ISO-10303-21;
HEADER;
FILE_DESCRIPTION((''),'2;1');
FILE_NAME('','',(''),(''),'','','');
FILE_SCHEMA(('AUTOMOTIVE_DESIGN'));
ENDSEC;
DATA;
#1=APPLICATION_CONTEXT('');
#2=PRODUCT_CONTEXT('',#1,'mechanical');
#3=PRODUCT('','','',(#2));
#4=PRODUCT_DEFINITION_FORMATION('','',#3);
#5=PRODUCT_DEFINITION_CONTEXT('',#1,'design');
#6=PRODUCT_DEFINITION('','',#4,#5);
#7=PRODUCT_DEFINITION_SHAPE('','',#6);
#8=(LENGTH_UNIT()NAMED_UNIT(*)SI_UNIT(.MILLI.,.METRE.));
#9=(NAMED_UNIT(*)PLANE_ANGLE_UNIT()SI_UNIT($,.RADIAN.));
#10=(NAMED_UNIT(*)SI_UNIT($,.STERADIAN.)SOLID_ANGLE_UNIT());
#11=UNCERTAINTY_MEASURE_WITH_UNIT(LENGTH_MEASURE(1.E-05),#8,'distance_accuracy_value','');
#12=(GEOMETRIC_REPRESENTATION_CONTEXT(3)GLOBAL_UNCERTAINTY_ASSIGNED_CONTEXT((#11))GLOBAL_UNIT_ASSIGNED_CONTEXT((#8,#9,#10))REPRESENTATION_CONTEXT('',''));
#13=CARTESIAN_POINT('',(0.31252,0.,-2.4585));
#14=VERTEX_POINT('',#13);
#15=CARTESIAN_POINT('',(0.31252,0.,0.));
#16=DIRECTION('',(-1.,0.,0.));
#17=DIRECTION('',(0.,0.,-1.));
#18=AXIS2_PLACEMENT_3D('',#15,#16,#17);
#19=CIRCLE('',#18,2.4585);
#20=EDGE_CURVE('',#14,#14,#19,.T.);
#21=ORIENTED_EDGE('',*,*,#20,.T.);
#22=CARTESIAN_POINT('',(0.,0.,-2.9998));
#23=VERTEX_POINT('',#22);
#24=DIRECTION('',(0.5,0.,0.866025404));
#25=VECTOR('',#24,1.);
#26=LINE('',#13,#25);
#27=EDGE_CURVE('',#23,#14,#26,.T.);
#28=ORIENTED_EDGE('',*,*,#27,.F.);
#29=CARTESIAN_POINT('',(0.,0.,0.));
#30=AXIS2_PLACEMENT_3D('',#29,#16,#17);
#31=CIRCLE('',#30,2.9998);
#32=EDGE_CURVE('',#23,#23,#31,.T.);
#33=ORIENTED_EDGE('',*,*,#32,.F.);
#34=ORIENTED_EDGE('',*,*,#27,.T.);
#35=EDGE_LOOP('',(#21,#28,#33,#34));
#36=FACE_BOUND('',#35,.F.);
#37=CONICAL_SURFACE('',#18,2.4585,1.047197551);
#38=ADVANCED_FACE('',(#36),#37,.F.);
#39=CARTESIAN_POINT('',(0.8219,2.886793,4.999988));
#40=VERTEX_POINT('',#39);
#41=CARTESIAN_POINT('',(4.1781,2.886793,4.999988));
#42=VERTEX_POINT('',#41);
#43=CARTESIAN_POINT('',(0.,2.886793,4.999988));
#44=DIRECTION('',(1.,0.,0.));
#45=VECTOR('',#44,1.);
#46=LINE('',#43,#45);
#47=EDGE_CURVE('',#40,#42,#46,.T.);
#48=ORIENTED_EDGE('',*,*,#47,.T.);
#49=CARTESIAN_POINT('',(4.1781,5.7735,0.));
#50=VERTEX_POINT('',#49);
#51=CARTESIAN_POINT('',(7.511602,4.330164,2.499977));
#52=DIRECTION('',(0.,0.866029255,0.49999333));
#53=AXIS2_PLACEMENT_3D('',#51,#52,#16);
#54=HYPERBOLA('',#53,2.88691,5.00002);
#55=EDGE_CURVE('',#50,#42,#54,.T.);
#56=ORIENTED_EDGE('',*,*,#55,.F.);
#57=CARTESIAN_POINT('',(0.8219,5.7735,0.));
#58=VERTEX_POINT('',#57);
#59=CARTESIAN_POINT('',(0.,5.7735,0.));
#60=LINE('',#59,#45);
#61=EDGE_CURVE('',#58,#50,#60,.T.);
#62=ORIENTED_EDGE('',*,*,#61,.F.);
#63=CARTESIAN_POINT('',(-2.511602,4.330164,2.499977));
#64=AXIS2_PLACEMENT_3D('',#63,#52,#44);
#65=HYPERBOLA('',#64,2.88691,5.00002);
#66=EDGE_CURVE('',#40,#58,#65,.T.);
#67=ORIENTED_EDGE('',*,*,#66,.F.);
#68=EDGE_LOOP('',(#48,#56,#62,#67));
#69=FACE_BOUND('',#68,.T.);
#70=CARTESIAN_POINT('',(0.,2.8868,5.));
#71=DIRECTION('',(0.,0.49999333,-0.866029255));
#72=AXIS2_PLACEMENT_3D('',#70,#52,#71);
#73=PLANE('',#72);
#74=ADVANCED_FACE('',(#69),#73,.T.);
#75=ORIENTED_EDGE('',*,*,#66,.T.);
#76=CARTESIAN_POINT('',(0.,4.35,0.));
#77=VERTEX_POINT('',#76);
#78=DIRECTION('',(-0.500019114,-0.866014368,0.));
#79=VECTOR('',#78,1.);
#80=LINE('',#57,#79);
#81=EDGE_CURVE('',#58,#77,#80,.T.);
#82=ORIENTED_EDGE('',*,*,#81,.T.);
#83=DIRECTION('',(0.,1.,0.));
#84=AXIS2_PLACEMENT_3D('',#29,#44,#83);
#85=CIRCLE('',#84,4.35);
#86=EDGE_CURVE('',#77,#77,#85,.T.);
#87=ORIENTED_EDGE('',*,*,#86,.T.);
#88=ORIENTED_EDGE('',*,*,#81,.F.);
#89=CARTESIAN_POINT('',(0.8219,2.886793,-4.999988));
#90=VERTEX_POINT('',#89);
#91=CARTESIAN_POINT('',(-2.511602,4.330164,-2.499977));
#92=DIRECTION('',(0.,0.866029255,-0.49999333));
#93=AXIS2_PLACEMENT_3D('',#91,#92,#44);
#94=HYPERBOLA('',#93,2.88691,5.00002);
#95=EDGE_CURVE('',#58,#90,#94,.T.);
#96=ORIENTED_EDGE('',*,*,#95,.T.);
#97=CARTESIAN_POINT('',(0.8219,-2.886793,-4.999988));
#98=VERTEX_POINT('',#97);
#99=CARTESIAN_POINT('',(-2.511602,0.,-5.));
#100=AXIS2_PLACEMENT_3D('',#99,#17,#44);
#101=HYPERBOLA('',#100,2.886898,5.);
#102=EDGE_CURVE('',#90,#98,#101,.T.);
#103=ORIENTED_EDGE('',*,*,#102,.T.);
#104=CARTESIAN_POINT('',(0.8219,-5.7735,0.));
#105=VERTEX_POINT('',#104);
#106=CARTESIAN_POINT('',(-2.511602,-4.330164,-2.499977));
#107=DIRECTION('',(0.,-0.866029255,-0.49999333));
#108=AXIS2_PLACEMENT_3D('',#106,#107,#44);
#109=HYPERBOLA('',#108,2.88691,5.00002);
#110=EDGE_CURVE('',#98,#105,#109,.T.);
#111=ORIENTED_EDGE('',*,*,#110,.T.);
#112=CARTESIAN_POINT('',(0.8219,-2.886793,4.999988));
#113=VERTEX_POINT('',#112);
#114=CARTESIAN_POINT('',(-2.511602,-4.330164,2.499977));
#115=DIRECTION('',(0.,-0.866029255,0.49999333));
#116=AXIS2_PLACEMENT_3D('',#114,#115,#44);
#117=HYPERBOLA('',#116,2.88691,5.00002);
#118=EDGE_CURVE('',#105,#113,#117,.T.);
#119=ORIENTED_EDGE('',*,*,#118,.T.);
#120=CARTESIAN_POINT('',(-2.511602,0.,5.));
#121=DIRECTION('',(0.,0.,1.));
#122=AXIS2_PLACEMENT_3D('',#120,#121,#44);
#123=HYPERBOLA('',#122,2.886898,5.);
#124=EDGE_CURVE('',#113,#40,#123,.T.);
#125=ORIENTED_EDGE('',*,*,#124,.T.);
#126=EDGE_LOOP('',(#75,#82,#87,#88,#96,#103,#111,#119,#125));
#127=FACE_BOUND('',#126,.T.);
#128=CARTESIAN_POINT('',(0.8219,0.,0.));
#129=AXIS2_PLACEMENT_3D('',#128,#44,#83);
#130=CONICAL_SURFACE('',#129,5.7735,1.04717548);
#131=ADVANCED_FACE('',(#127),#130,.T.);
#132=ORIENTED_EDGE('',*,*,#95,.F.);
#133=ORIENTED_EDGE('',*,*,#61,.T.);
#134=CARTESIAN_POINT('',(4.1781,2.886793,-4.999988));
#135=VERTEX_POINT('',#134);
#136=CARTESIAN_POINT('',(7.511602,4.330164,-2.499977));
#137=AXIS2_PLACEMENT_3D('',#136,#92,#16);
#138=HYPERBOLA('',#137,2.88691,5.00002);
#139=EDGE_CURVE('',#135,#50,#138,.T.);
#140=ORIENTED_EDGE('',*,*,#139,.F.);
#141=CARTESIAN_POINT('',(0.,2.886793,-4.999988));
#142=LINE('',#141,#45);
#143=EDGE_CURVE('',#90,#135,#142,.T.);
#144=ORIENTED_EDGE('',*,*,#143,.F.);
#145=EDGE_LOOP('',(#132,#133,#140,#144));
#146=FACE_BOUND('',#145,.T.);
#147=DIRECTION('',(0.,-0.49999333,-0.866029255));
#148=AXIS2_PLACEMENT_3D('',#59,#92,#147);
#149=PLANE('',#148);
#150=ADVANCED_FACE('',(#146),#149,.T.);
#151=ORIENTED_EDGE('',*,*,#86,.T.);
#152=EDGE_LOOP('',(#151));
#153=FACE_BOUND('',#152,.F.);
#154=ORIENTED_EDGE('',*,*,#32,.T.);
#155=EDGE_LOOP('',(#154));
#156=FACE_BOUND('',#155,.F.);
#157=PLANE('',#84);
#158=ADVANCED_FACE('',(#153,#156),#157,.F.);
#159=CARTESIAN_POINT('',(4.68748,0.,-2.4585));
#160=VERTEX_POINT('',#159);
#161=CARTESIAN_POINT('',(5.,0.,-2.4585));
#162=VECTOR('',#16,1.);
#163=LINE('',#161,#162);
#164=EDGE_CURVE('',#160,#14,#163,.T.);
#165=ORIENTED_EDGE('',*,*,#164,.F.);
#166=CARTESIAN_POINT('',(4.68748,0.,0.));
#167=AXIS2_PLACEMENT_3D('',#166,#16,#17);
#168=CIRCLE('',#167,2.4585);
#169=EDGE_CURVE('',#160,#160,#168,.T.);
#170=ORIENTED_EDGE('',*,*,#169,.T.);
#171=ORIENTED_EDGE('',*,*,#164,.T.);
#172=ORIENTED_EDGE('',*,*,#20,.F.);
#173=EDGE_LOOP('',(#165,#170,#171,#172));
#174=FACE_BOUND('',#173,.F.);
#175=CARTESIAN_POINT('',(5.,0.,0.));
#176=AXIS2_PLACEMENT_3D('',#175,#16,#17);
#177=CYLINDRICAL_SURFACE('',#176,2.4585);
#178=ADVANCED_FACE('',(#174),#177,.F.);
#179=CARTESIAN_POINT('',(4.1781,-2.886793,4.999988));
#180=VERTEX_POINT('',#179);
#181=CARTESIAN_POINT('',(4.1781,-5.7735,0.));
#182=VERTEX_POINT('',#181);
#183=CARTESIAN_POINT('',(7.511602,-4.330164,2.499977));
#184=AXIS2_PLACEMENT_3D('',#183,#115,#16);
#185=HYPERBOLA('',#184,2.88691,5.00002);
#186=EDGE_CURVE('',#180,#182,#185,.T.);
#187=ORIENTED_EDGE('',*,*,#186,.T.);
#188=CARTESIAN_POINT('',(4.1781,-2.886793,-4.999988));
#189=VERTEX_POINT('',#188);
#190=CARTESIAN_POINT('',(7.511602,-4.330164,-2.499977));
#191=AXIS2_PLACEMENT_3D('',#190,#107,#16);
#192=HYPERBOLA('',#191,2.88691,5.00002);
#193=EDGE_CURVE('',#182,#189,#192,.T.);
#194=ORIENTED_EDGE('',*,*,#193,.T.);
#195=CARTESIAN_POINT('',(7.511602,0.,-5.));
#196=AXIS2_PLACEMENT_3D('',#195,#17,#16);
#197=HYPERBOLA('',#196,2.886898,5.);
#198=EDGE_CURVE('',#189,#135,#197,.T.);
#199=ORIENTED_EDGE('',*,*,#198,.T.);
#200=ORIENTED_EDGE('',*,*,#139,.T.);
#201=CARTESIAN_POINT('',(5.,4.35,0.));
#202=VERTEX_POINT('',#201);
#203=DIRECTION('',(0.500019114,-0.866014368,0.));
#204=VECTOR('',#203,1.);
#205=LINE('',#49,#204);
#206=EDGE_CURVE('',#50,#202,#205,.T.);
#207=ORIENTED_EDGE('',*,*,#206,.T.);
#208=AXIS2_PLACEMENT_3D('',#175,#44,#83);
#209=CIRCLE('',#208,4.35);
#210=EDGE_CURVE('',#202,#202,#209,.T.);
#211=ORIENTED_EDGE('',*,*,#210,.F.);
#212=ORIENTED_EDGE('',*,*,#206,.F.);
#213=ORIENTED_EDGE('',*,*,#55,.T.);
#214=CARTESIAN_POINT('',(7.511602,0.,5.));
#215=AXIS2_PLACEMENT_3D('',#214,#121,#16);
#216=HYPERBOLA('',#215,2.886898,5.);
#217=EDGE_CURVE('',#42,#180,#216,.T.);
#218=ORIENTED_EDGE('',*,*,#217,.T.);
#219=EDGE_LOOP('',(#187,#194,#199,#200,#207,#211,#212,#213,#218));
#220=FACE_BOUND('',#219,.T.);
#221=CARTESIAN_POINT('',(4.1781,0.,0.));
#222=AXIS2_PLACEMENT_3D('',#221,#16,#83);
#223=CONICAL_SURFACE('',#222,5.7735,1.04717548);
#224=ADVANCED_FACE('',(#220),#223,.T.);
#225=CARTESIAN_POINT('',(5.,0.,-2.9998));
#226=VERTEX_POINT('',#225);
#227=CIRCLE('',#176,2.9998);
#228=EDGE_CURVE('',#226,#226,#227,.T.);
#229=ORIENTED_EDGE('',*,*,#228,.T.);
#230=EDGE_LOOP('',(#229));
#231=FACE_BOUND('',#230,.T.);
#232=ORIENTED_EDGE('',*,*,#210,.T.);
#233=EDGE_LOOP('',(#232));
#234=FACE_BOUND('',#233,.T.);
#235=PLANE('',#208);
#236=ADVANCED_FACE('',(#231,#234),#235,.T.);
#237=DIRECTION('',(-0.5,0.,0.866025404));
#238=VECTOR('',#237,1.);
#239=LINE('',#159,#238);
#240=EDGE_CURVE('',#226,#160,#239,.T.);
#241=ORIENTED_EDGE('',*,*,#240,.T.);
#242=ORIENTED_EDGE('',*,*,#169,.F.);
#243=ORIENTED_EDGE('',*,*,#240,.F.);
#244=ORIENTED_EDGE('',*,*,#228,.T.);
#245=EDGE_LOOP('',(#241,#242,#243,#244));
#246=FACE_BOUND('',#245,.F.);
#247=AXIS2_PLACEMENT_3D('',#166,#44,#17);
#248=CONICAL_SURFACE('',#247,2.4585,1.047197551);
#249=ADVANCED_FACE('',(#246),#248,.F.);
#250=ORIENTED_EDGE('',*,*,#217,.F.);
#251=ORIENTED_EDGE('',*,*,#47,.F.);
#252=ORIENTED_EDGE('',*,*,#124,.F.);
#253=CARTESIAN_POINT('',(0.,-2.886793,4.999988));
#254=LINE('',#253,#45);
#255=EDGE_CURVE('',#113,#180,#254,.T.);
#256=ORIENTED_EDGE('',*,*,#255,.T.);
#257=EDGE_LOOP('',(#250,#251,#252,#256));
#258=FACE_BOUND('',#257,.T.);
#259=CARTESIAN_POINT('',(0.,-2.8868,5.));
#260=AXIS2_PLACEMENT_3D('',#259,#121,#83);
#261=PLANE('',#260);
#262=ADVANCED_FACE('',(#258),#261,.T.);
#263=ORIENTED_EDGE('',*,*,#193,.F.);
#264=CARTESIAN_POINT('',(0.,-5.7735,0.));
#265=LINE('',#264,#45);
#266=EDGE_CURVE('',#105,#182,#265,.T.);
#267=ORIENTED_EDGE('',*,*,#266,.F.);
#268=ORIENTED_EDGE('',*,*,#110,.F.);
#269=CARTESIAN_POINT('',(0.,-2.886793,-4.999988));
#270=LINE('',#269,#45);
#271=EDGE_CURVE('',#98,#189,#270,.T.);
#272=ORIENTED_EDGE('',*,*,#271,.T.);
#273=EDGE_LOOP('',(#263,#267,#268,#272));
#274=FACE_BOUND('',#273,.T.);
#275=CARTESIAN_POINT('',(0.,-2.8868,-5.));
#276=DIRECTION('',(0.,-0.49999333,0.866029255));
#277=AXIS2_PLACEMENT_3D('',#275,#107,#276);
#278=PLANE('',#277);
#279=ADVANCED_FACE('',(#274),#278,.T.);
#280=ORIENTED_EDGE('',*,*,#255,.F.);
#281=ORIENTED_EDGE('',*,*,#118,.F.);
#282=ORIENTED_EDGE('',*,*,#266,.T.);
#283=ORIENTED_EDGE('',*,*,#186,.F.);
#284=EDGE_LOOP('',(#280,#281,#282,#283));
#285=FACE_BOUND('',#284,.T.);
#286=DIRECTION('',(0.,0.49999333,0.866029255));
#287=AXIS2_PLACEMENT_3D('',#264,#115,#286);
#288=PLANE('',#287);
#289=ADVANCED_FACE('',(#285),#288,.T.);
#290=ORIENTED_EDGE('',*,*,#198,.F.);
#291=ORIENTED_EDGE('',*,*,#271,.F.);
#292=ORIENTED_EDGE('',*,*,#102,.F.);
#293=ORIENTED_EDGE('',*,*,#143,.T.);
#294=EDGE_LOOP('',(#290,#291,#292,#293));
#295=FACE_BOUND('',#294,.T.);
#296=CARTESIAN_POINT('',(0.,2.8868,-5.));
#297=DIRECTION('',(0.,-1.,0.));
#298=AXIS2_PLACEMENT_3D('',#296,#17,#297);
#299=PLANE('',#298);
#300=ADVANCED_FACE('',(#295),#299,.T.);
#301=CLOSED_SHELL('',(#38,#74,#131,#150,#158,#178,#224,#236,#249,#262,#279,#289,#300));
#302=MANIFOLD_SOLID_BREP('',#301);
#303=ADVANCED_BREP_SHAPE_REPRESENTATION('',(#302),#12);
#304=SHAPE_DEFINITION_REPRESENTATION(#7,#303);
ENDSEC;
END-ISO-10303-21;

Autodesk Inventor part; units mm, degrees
ref_plane "YZ Plane" through (0, 0, 0) normal (1, 0, 0) x (0, 1, 0)
ref_plane "XZ Plane" through (0, 0, 0) normal (0, 1, 0) x (-1, 0, 0)
sketch "Sketch1" plane through (0, 0, 0) normal (1, 0, 0) x (0, 1, 0)
  line L0 (-5.7735, 0) -> (-2.8868, 5)
  line L1 (-2.8868, 5) -> (2.8868, 5)
  line L2 (2.8868, 5) -> (5.7735, 0)
  line L3 (5.7735, 0) -> (2.8868, -5)
  line L4 (2.8868, -5) -> (-2.8868, -5)
  line L5 (-2.8868, -5) -> (-5.7735, 0)
  point P0 (0, 0)
  point P1 (0, 0)
  dimension "d0" = 11.547
extrude "Body" add sketch "Sketch1" along normal blind 5
sketch "Sketch2" plane through (0, 0, 0) normal (0, 0, 1) x (1, 0, 0)
  line L0 (0, 2.8868) -> (0, 5.7735) projected
  line L1 (0, 5.7735) -> (5, 5.7735) projected
  line L2 (5, 2.8868) -> (5, 5.7735) projected
  line L3 (-1, 0) -> (6, 0) projected
  line L4 (0.8219, 5.7735) -> (0, 4.35)
  line L5 (4.1781, 5.7735) -> (5, 4.35)
  dimension "d3" = 30
  dimension "d4" = 30
  dimension "d5" = 8.7
  dimension "d6" = 8.7
revolve "Chamfer1" cut sketch "Sketch2" angle 360 about axis through (-10, 0, 0) along (1, 0, 0)
sketch "Sketch3" plane through (5, 0, 0) normal (1, 0, 0) x (0, 0, -1)
  arc A0 (-0.625, -1.0825) -> (0.625, -1.0825) centre (0, 0) ccw projected
hole "Thread" at (5, 0, 0) direction (-1, 0, 0) diameter 4.917 end through all thread size "M6x1" class "6H" standard "ISO Metric profile"
chamfer "Chamfer2" distance 0.5413 angle 30 1 edges at (5, 0, 2.4585) measured on face at (5, 3.6714, -0.4458)
chamfer "Chamfer3" distance 0.5413 angle 30 1 edges at (0, 0, 2.4585) measured on face at (0, 3.6714, -0.4458)
ref_plane "Work Plane1" through (-11.0799, 0, 0) normal (0, -0.8660254, -0.5) x (1, 0, 0)
equation "\"d0\" = 1.1547 * SW"
equation "\"d1\" = KOH"
equation "\"d3\" = ANG1"
equation "\"d4\" = ANG2"
equation "\"d5\" = SW0"
equation "\"d6\" = SW01"
equation "\"d8\" = -0.5 * GD1 + 0.5 * NND"
equation "\"d40\" = -0.5 * GD1 + 0.5 * NND"
equation "\"d10\" = -0.5 * GD1 + 0.5 * NND"
equation "\"d41\" = -0.5 * GD1 + 0.5 * NND"
equation "\"ANG1\" = 30deg"
equation "\"ANG2\" = 30deg"
equation "\"NND\" = 6"
equation "\"KOH\" = 5"
equation "\"SW0\" = 8.7"
equation "\"SW01\" = 8.7"
equation "\"GUL\" = 0.541266 * PTC"
equation "\"THREADDIA\" = 6"
equation "\"TOA\" = 30deg"
equation "\"PTC\" = 1"
equation "\"E0\" = 1.155 * SW"
equation "\"GAL\" = 0.541266 * PTC"
equation "\"SW\" = 10"
equation "\"GD1\" = 4.917468"
properties part number "DIN 555-5 - M6" material "Steel, Mild"
